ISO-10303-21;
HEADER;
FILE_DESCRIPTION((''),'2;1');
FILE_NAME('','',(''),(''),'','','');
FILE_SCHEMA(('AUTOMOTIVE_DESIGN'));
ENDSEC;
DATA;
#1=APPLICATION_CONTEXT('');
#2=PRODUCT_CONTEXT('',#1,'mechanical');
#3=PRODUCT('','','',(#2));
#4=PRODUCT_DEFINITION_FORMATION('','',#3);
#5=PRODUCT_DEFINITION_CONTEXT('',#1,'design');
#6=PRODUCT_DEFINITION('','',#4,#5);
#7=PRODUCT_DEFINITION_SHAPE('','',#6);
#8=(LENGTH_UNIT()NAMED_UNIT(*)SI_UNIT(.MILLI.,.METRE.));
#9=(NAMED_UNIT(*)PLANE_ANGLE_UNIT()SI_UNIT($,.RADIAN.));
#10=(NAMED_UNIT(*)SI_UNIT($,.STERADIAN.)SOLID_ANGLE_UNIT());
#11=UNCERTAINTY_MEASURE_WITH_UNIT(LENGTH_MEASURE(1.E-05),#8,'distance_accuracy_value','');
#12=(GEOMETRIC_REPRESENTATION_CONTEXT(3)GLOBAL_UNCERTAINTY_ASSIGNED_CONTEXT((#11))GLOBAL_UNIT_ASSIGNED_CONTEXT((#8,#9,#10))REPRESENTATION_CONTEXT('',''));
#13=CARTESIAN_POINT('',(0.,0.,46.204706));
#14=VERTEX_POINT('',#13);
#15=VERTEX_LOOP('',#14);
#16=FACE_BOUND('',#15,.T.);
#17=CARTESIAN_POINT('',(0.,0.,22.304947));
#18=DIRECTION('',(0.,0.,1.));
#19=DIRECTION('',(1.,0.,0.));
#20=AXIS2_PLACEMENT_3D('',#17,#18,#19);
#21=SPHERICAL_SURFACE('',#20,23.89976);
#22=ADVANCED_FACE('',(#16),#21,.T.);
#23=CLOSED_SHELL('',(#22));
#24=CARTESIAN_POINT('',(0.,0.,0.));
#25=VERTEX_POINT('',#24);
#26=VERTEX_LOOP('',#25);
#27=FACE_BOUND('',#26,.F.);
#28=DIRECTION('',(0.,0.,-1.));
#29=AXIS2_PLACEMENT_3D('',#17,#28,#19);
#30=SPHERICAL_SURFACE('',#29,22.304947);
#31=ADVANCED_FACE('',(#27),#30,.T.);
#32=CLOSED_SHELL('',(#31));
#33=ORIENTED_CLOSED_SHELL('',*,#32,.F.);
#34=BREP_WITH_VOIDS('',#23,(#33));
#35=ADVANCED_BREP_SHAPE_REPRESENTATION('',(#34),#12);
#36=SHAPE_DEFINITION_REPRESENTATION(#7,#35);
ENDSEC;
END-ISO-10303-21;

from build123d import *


# Not quite as in the source:
# - a feature names something its author has since deleted; it is built from what else it names


with BuildPart() as f1:
    # F0 (on Front) → F1 (revolve)
    with BuildSketch(Plane.XZ):
        with BuildLine():
            ThreePointArc((0, 44.6098931134), (22.3049465567, 22.3049465567), (0, 0))
            Line((0, 0), (0, -1.5948133343))
            ThreePointArc((0, -1.5948133343), (23.899759891, 22.3049465567), (0, 46.2047064477))
            Line((0, 46.2047064477), (0, 44.6098931134))
        make_face()
    revolve(axis=Axis((0, 0, 35.0403487682), (0, 0, 1)))


solid = f1.part
